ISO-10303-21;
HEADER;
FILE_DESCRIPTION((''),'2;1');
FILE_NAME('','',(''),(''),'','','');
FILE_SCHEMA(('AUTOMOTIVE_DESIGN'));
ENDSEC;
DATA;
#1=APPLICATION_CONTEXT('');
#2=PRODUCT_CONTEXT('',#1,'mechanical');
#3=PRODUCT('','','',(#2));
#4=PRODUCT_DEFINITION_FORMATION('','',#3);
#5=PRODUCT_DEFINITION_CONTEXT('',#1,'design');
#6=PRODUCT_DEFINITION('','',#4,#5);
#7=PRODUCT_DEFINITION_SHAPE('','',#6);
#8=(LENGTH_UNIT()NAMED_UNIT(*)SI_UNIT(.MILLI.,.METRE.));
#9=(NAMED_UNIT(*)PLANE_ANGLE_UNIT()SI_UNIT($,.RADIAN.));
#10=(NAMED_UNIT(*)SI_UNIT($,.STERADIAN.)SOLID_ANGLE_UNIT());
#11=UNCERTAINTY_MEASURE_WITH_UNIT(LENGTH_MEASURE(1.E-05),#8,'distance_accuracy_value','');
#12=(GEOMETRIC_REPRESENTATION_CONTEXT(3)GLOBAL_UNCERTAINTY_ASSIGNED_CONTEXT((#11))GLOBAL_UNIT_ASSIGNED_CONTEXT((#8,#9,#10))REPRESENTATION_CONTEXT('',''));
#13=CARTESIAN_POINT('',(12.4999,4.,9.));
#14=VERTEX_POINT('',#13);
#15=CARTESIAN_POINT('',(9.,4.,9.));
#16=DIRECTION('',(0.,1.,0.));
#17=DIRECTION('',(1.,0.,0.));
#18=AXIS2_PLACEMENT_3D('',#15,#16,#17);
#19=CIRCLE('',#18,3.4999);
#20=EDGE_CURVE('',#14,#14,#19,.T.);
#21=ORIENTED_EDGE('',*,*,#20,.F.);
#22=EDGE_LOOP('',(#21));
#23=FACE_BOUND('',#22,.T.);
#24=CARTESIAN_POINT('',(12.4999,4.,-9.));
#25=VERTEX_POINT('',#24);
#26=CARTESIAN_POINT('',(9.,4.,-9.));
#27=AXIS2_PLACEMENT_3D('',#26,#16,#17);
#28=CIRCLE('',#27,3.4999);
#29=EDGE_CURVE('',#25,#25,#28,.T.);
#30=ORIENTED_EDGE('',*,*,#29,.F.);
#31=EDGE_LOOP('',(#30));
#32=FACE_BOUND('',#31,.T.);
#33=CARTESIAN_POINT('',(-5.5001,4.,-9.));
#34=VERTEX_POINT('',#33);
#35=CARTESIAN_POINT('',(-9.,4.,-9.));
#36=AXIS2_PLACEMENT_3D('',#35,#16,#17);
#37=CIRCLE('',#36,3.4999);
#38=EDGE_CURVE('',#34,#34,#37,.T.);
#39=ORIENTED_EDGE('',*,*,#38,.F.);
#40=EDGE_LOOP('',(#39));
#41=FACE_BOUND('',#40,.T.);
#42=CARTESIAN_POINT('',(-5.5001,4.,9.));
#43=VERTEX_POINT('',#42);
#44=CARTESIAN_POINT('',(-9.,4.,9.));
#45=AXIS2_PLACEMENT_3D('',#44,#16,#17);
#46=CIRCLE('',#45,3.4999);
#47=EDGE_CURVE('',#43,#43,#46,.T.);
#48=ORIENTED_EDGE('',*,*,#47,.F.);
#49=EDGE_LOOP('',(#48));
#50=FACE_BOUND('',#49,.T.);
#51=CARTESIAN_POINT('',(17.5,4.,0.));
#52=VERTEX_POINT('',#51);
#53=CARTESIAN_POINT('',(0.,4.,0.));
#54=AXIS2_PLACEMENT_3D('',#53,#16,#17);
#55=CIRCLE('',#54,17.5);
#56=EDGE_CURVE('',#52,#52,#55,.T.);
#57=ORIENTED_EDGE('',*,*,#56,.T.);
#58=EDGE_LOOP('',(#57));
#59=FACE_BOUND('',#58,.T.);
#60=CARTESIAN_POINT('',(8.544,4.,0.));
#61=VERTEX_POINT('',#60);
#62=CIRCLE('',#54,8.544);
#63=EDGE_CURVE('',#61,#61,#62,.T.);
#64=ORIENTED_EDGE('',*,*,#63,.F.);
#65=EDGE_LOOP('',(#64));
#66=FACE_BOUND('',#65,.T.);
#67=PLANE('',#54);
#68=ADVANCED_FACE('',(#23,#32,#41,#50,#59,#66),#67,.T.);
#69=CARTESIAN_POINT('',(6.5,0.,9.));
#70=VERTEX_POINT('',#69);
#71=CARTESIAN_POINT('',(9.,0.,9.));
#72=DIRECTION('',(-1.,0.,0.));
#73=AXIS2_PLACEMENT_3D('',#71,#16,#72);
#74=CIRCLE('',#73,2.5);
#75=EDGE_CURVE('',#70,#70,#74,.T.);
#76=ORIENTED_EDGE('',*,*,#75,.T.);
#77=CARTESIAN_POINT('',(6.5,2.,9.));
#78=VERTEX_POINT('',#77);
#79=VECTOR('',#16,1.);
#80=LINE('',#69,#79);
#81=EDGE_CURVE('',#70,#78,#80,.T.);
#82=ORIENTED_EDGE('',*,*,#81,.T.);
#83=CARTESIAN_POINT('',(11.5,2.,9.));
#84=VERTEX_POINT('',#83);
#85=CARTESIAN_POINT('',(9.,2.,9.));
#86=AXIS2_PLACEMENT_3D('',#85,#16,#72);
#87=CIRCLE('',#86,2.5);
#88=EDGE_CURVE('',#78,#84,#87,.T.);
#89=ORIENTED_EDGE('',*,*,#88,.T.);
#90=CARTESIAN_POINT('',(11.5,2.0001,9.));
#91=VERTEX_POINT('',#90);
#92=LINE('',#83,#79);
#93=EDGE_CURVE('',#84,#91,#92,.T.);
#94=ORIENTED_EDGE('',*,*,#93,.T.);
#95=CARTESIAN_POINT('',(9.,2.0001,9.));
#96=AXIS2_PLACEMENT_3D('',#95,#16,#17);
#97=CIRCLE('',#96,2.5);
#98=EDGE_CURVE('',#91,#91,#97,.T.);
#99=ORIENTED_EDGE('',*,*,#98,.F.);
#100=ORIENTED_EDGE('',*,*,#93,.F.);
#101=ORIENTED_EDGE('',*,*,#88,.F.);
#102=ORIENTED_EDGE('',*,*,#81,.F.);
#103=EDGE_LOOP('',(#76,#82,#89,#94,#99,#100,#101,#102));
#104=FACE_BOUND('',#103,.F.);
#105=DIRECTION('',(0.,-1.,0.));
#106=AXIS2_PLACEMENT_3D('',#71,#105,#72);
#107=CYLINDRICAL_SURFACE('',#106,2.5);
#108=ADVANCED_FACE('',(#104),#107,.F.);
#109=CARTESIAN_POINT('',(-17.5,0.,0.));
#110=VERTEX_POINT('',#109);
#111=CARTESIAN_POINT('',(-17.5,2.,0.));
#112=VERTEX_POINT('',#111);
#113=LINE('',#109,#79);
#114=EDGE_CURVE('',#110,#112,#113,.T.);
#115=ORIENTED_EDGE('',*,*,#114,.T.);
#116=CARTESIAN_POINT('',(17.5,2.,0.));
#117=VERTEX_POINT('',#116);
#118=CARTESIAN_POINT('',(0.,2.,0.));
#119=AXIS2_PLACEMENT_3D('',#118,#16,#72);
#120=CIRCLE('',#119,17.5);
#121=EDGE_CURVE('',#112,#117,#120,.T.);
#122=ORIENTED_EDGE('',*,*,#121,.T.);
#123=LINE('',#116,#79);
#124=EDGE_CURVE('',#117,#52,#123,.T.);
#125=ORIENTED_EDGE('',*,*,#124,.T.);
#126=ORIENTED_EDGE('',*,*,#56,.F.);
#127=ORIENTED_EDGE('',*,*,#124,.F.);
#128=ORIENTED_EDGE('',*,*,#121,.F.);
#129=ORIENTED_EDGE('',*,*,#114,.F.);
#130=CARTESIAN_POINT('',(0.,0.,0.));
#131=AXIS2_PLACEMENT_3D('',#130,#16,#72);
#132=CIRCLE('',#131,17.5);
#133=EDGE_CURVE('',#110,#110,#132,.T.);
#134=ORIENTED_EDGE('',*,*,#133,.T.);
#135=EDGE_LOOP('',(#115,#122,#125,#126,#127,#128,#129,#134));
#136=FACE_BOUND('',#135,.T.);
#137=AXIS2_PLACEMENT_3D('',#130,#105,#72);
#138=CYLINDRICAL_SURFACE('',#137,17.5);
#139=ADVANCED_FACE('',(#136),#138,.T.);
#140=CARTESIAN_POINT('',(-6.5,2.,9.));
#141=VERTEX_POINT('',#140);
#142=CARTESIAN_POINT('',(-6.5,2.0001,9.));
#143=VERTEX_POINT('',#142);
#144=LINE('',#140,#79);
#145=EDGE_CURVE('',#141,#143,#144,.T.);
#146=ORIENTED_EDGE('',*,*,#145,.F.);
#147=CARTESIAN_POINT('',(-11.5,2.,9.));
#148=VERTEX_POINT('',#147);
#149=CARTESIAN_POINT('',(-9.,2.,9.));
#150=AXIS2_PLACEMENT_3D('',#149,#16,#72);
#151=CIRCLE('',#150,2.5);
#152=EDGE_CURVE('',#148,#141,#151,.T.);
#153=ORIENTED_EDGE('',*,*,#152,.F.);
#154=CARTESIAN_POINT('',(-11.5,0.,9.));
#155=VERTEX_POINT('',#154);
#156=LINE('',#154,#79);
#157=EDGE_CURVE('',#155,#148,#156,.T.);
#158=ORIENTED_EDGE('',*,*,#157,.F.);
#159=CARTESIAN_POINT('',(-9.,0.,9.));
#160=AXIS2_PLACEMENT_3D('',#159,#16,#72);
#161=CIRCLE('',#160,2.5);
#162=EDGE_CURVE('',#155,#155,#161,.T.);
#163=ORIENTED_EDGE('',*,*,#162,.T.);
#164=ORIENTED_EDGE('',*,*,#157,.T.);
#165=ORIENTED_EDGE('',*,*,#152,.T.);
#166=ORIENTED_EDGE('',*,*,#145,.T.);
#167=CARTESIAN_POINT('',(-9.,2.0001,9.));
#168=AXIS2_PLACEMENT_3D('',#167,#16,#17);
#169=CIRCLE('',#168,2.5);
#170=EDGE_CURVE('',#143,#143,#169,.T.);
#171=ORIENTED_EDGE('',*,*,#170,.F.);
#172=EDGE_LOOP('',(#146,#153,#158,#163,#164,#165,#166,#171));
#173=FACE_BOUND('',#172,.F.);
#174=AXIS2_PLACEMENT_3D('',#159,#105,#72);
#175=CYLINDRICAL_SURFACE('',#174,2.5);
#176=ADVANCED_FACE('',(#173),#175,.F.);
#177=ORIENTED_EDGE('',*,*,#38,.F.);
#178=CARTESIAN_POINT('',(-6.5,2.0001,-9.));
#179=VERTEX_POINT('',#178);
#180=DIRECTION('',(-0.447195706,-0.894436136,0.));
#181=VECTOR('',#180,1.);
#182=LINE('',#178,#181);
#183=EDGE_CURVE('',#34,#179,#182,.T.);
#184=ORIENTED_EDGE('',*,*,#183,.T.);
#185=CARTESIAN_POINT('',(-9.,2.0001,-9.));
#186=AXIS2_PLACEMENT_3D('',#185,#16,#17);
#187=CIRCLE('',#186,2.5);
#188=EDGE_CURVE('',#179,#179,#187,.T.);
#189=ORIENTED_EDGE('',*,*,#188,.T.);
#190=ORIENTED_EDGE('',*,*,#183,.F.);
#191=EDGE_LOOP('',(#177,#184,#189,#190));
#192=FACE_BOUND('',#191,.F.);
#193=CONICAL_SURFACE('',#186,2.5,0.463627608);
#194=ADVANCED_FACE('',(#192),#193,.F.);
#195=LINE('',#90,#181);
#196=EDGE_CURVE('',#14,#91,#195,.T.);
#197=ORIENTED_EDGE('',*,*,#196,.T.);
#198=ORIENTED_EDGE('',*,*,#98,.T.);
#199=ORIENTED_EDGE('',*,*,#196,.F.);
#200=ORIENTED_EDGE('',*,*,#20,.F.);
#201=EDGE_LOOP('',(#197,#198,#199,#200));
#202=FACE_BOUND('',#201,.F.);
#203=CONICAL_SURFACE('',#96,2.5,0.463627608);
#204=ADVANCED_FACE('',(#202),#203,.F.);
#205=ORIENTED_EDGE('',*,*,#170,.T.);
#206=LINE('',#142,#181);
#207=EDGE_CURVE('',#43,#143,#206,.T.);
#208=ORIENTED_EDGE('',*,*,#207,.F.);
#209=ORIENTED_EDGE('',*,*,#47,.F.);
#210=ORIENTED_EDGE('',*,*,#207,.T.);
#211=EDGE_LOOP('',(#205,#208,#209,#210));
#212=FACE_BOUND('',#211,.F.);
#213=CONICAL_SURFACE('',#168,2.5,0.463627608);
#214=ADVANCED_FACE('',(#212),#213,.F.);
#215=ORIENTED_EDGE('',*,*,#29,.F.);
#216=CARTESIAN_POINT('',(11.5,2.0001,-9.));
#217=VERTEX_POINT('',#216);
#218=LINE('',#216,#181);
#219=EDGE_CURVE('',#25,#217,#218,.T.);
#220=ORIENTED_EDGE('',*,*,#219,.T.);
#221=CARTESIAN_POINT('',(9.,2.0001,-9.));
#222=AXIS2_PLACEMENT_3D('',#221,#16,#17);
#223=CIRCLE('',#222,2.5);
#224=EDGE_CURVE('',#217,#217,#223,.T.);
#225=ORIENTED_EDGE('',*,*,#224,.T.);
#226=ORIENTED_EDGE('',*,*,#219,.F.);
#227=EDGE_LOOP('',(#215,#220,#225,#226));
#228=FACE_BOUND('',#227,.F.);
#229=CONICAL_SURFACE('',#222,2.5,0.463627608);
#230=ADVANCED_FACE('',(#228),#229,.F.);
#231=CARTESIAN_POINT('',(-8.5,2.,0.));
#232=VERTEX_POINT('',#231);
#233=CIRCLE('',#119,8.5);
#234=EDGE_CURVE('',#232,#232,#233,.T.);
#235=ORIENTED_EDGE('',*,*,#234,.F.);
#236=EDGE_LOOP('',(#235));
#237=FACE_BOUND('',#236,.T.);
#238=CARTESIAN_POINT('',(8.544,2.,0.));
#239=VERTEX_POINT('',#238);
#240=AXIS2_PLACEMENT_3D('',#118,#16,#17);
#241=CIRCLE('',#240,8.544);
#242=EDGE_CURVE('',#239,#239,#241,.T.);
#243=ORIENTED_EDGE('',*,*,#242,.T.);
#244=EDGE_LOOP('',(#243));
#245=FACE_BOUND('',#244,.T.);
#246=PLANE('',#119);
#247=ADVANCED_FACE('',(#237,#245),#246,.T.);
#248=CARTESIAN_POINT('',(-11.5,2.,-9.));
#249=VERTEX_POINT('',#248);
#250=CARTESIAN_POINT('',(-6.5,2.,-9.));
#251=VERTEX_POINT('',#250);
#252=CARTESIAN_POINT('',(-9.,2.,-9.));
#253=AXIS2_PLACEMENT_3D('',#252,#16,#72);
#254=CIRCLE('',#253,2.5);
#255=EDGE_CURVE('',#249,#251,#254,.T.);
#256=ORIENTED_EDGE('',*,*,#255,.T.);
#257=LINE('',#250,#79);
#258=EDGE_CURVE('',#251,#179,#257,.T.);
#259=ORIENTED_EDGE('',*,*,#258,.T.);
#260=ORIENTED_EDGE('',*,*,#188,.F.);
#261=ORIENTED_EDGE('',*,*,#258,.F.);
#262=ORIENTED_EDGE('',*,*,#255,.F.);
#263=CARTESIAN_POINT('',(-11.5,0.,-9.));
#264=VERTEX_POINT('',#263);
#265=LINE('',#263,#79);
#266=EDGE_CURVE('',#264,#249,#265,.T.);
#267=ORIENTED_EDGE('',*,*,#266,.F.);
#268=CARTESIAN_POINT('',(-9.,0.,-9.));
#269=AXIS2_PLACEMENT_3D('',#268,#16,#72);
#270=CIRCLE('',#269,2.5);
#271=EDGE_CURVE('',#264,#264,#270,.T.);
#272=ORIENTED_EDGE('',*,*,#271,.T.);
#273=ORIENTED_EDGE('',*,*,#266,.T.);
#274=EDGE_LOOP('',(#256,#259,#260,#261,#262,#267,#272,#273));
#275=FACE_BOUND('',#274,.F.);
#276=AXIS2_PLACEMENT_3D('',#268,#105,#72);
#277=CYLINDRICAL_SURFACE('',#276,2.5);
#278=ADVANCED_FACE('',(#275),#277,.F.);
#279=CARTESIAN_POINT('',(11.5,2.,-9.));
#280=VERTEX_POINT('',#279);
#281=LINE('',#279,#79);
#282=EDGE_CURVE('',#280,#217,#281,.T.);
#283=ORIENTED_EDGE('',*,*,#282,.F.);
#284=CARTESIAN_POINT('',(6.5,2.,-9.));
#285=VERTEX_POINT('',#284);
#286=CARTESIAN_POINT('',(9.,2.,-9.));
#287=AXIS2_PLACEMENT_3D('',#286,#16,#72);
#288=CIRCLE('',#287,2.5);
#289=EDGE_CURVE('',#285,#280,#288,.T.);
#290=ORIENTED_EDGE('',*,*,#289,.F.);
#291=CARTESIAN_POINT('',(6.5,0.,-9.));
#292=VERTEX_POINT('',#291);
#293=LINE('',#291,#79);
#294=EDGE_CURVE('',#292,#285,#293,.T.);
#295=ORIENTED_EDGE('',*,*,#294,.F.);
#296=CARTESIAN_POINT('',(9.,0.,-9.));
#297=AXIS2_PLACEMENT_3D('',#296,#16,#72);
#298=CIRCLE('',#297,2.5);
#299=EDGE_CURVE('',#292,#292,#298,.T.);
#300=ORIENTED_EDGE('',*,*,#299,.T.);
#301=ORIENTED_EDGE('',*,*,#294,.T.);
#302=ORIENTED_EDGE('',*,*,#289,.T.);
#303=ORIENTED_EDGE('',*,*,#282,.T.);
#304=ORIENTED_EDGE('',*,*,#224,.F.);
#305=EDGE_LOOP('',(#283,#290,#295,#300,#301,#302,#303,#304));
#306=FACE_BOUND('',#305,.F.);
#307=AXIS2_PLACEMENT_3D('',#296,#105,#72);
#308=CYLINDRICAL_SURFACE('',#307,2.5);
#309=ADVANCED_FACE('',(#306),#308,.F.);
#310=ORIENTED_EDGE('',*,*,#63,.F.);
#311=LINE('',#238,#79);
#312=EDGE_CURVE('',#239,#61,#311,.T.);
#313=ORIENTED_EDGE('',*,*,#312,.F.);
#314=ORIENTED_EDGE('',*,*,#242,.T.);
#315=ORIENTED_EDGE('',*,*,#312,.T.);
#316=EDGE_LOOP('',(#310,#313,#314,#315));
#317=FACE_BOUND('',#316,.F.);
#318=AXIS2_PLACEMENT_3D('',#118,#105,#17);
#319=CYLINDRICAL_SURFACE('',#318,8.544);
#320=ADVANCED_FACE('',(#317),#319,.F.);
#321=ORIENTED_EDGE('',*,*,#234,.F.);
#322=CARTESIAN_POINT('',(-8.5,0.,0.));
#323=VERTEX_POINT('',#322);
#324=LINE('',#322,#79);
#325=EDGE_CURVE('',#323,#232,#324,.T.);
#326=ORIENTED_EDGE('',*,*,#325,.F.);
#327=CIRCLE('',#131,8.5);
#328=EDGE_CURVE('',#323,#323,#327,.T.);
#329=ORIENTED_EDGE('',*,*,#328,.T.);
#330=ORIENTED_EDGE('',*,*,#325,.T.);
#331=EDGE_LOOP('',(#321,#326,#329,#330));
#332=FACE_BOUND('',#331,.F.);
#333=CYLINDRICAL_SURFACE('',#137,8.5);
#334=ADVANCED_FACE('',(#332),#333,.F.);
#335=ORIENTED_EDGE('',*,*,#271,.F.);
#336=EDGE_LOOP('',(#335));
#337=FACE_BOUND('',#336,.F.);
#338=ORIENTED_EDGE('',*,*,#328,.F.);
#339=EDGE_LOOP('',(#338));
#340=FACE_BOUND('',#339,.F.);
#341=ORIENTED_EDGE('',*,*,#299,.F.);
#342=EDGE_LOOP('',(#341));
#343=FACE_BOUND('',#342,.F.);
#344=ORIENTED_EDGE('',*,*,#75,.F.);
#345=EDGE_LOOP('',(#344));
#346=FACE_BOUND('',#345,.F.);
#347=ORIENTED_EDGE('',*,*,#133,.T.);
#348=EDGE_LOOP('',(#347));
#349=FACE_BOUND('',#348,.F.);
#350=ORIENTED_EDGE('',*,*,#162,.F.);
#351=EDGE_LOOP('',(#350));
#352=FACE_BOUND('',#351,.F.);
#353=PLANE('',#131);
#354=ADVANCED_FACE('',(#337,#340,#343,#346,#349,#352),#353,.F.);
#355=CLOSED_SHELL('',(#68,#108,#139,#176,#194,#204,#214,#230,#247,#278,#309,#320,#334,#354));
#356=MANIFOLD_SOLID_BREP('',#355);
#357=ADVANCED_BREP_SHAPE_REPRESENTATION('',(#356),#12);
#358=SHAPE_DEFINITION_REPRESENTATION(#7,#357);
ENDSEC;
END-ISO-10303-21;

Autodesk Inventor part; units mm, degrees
ref_plane "YZ Plane" through (0, 0, 0) normal (1, 0, 0) x (0, 1, 0)
ref_plane "XZ Plane" through (0, 0, 0) normal (0, 1, 0) x (-1, 0, 0)
ref_plane "XY Plane" through (0, 0, 0) normal (0, 0, 1) x (1, 0, 0)
sketch "Esquisse3" plane through (0, 0, 0) normal (0, 1, 0) x (-1, 0, 0)
  line L0 (-6.5, 6.5) -> (6.5, 6.5) construction
  line L1 (6.5, 6.5) -> (6.5, -6.5) construction
  line L2 (6.5, -6.5) -> (-6.5, -6.5) construction
  line L3 (-6.5, -6.5) -> (-6.5, 6.5) construction
  line L4 (-6.5, 6.5) -> (6.5, -6.5) construction
  line L5 (6.5, 6.5) -> (-6.5, -6.5) construction
  line L6 (-11.5, 11.5) -> (11.5, 11.5) construction
  line L7 (11.5, 11.5) -> (11.5, -11.5) construction
  line L8 (11.5, -11.5) -> (-11.5, -11.5) construction
  line L9 (-11.5, -11.5) -> (-11.5, 11.5) construction
  line L10 (-11.5, 11.5) -> (11.5, -11.5) construction
  line L11 (11.5, 11.5) -> (-11.5, -11.5) construction
  line L12 (-6.5, 6.5) -> (-11.5, 6.5) construction
  line L13 (-11.5, 6.5) -> (-11.5, 11.5) construction
  line L14 (-11.5, 11.5) -> (-6.5, 11.5) construction
  line L15 (-6.5, 11.5) -> (-6.5, 6.5) construction
  line L16 (-6.5, -6.5) -> (-11.5, -6.5) construction
  line L17 (-11.5, -6.5) -> (-11.5, -11.5) construction
  line L18 (-11.5, -11.5) -> (-6.5, -11.5) construction
  line L19 (-6.5, -11.5) -> (-6.5, -6.5) construction
  line L20 (6.5, -6.5) -> (11.5, -6.5) construction
  line L21 (11.5, -6.5) -> (11.5, -11.5) construction
  line L22 (11.5, -11.5) -> (6.5, -11.5) construction
  line L23 (6.5, -11.5) -> (6.5, -6.5) construction
  line L24 (11.5, 11.5) -> (6.5, 11.5) construction
  line L25 (6.5, 11.5) -> (6.5, 6.5) construction
  line L26 (6.5, 6.5) -> (11.5, 6.5) construction
  line L27 (11.5, 6.5) -> (11.5, 11.5) construction
  circle A0 centre (9, 9) radius 2.5
  circle A1 centre (9, -9) radius 2.5
  circle A2 centre (-9, -9) radius 2.5
  circle A3 centre (-9, 9) radius 2.5
  circle A4 centre (0, 0) radius 17.5
  circle A5 centre (0, 0) radius 8.5
  dimension "d1" = 13
  dimension "d2" = 13
  dimension "d3" = 5
  dimension "d4" = 35
  dimension "d9" = 9
extrude "Extrusion1" add sketch "Esquisse3" along normal blind 2
sketch "Esquisse4" plane through (0, 2, 0) normal (0, 1, 0) x (1, 0, 0)
  circle A0 centre (-9, 9) radius 3.5
  circle A1 centre (-9, 9) radius 2.5 projected
  circle A2 centre (9, 9) radius 3.5
  circle A3 centre (9, -9) radius 3.5
  circle A4 centre (-9, -9) radius 3.5
  circle A5 centre (9, 9) radius 2.5 projected
  circle A6 centre (9, -9) radius 2.5 projected
  circle A7 centre (-9, -9) radius 2.5 projected
  circle A8 centre (0, 0) radius 17.5
  circle A9 centre (0, 0) radius 8.544
  circle A10 centre (9, 9) radius 2.5 projected
  circle A11 centre (9, 9) radius 2.5
  circle A12 centre (9, -9) radius 2.5
  circle A13 centre (-9, -9) radius 2.5
  dimension "d10" = 7
  dimension "d11" = 7
  dimension "d12" = 7
  dimension "d13" = 7
extrude "Extrusion2" add sketch "Esquisse4" along normal blind 2 contours A0 | A2 | A3 | A4 | A8
chamfer "Chanfrein1" distance 1 distance2 2 1 edges at (-11.5, 4, -9) measured on face at (3.3085, 4, 12.0053)
chamfer "Chanfrein2" distance 1 distance2 2 1 edges at (6.5, 4, -9) measured on face at (3.3085, 4, 12.0053)
chamfer "Chanfrein3" distance 1 distance2 2 1 edges at (-11.5, 4, 9) measured on face at (3.3085, 4, 12.0053)
chamfer "Chanfrein4" distance 1 distance2 2 1 edges at (6.5, 4, 9) measured on face at (3.3085, 4, 12.0053)
properties part number "Pièce_moteur_maintient_test_2"
